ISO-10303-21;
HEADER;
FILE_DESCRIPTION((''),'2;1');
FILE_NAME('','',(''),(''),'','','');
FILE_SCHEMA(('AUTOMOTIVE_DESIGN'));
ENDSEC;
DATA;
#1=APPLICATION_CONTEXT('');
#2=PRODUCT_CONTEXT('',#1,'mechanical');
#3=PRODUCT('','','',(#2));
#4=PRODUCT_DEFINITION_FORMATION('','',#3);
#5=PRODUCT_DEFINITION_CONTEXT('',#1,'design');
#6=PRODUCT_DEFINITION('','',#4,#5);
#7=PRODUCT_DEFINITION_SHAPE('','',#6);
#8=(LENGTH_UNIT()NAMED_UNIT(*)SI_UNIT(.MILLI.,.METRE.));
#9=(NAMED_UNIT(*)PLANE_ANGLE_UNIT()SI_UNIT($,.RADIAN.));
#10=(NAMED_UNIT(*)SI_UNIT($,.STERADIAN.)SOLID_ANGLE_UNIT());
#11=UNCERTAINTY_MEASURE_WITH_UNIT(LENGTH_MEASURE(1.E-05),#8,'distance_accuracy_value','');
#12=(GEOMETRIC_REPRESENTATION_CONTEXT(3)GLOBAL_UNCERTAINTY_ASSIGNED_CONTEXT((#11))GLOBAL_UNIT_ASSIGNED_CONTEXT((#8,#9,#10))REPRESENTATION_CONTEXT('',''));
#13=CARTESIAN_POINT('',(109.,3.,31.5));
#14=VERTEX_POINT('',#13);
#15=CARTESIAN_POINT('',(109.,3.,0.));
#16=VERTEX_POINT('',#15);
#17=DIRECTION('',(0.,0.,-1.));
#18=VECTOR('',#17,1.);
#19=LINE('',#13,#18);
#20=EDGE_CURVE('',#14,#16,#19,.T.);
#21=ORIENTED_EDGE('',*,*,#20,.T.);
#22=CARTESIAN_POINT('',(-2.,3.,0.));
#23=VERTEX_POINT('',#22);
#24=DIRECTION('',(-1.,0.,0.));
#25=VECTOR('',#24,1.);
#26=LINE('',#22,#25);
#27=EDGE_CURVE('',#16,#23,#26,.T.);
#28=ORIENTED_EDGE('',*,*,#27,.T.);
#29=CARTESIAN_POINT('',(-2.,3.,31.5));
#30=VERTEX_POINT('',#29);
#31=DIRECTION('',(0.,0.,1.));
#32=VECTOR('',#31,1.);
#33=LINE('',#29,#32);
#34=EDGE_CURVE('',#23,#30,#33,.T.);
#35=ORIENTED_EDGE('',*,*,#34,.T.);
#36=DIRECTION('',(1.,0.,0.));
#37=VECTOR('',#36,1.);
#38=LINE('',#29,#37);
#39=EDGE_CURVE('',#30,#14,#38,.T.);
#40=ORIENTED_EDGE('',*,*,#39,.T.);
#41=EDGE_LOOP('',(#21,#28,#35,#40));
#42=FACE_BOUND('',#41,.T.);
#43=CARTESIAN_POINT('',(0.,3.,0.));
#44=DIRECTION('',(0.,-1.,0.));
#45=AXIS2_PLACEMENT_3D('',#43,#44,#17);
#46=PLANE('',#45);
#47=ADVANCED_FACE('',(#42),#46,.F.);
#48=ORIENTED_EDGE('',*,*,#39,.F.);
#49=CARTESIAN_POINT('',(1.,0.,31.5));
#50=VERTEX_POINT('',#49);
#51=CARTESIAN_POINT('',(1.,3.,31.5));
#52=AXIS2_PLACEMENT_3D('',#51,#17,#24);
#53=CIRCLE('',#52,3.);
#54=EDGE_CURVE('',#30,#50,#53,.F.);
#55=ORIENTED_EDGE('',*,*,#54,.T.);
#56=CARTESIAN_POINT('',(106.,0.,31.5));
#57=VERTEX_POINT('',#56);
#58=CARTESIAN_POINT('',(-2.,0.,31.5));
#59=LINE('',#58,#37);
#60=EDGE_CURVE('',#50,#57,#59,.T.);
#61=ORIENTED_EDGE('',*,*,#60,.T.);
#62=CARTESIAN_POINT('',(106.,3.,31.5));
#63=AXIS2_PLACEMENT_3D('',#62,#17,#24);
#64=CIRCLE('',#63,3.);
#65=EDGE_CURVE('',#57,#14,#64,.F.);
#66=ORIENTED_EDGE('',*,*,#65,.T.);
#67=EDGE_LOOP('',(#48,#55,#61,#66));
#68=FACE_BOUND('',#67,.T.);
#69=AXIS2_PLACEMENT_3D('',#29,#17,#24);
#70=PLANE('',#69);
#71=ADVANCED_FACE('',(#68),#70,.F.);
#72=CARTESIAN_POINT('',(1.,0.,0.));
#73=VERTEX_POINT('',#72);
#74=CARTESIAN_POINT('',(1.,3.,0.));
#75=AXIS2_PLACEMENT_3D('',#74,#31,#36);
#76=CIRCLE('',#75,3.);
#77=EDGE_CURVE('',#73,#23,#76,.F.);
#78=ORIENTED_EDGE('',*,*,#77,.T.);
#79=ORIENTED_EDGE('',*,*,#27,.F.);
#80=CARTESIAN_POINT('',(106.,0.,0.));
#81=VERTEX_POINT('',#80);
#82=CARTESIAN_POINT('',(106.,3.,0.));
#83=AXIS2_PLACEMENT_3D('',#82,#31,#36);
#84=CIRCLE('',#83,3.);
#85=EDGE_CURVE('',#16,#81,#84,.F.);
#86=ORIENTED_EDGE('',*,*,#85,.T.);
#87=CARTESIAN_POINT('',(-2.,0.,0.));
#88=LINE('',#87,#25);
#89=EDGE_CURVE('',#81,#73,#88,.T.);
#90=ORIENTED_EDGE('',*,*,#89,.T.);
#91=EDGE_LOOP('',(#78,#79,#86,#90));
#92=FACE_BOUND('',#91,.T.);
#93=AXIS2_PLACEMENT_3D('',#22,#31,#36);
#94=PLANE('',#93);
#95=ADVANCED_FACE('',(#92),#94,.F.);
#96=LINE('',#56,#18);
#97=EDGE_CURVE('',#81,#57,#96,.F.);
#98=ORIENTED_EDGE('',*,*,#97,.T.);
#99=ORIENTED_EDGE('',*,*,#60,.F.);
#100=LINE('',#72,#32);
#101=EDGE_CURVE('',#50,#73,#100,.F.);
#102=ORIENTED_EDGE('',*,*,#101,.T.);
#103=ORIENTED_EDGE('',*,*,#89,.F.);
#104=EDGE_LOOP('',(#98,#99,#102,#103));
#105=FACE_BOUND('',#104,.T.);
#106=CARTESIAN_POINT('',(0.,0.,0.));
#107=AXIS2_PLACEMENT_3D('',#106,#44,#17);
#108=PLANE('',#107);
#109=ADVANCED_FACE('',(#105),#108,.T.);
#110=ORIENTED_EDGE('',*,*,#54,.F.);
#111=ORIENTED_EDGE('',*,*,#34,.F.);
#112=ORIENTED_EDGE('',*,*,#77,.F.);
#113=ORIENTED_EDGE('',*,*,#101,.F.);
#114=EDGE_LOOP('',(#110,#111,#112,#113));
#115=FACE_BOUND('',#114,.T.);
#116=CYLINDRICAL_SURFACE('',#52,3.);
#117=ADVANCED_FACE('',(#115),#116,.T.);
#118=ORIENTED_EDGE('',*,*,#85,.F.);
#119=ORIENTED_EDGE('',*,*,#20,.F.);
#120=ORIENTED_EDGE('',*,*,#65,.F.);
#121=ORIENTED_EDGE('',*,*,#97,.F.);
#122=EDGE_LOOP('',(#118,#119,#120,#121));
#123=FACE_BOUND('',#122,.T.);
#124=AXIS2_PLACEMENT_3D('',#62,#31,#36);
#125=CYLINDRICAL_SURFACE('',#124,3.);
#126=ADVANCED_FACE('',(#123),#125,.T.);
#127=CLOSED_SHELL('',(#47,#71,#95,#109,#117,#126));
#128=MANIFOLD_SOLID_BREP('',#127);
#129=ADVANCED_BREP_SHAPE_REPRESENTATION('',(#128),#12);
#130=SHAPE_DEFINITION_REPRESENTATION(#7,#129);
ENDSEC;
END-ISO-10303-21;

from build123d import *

# Parameters (mm, degrees)
SKETCH_1_W                       = 111
SKETCH_1_H                       = 31.5
EXTRUDE_1_DEPTH                  = 3
TOOL_D3_R3_FRONT_OUTER_CORNERS_R = 3


with BuildPart() as part:
    # Эскиз1 → Бобышка-Вытянуть1 (new body)
    with BuildSketch(Plane(origin=(0, 0, 0), x_dir=(1, 0, 0), z_dir=(0, 1, 0))):
        with Locations((53.5, -15.75)):
            Rectangle(SKETCH_1_W, SKETCH_1_H)
    extrude(amount=EXTRUDE_1_DEPTH)

    # tool_D3_R3_front_outer_corners
    tool_d3_r3_front_outer_corners_edges = [part.edges().sort_by_distance(p)[0] for p in [
        (-2, 0, 15.75),
        (109, 0, 15.75),
    ]]
    fillet(tool_d3_r3_front_outer_corners_edges, radius=TOOL_D3_R3_FRONT_OUTER_CORNERS_R - 0.0001)  # a hair under: the kernel refuses the full size


solid = part.part
